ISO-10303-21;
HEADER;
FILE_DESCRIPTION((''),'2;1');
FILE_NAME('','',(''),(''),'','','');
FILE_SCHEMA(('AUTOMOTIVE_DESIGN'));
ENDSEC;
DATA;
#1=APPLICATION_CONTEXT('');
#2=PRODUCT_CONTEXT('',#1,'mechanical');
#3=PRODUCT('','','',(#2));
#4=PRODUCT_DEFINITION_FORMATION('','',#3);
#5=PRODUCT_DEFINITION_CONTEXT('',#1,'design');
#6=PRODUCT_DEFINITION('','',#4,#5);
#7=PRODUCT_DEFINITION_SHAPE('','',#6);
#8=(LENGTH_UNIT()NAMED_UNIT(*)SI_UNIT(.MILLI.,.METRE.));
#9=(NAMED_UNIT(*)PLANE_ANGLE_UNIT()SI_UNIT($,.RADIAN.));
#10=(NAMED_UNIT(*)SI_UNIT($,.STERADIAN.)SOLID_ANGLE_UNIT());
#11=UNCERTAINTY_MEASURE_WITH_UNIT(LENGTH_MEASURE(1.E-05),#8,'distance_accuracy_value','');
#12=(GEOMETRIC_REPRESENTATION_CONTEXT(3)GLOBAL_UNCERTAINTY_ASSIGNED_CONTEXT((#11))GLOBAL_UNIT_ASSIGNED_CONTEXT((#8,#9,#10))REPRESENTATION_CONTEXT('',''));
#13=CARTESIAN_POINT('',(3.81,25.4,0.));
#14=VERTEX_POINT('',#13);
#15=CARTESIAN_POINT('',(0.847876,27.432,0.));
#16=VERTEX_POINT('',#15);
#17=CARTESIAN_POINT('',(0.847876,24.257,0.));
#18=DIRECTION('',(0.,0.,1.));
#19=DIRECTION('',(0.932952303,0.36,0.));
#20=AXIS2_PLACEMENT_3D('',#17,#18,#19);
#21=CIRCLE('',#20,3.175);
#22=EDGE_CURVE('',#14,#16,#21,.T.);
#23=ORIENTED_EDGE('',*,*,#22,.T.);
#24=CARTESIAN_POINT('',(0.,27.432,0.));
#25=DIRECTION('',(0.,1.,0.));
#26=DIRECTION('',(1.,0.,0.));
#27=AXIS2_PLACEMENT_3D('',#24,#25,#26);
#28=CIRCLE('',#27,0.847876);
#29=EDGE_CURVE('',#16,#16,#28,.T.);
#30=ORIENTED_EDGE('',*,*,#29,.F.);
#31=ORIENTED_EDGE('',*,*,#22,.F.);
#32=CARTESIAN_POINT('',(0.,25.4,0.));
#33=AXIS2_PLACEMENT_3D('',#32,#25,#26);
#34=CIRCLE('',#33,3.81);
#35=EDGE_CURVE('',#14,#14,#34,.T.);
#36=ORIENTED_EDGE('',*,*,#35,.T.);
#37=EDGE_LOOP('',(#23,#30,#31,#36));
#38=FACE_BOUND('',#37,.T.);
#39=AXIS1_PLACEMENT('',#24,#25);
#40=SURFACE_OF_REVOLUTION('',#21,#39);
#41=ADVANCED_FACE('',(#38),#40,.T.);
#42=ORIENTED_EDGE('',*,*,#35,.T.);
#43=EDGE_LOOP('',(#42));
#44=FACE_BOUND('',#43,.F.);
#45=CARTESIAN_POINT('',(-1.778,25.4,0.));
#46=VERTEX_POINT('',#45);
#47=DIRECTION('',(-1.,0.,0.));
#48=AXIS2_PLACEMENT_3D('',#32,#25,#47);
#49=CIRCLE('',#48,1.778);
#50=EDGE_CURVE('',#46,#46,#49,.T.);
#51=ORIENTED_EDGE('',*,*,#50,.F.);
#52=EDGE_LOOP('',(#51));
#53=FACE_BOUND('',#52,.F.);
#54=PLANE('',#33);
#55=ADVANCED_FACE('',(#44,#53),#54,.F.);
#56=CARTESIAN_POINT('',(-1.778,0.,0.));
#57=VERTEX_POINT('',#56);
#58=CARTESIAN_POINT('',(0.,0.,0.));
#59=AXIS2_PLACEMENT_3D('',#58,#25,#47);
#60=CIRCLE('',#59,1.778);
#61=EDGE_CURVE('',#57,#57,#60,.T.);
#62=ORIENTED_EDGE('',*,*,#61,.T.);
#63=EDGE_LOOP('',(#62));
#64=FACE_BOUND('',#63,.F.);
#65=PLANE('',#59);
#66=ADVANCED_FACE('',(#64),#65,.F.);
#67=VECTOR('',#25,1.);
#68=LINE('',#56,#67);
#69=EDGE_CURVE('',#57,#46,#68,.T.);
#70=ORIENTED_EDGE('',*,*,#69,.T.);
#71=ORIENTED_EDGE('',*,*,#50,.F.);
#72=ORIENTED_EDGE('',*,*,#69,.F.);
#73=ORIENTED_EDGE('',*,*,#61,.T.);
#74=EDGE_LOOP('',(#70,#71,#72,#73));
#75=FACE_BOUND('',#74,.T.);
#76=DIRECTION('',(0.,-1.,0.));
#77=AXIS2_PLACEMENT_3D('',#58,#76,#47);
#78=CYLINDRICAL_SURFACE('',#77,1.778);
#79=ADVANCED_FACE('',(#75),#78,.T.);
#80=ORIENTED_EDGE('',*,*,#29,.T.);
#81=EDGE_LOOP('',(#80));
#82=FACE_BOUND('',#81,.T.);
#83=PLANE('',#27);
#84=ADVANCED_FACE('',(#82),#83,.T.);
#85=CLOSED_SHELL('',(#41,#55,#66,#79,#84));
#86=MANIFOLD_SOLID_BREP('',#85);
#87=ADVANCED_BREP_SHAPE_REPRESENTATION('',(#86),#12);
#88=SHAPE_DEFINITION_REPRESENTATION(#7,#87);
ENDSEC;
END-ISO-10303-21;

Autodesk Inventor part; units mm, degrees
ref_plane "YZ Plane" through (0, 0, 0) normal (1, 0, 0) x (0, 1, 0)
ref_plane "XZ Plane" through (0, 0, 0) normal (0, 1, 0) x (-1, 0, 0)
ref_plane "XY Plane" through (0, 0, 0) normal (0, 0, 1) x (1, 0, 0)
sketch "Sketch1" plane through (0, 0, 0) normal (0, 1, 0) x (-1, 0, 0)
  circle A0 centre (0, 0) radius 1.778
  dimension "d0" = 3.556
extrude "Extrusion1" add sketch "Sketch1" along normal blind 25.4
sketch "Sketch3" plane through (0, 25.4, 0) normal (0, 1, 0) x (1, 0, 0)
  circle A0 centre (0, 0) radius 3.81
  dimension "d4" = 7.62
extrude "Extrusion2" add sketch "Sketch3" along normal blind 2.032
fillet "Fillet1" radius 3.175 1 edges at (-3.81, 27.432, 0)
properties part number "screw_o.15"
